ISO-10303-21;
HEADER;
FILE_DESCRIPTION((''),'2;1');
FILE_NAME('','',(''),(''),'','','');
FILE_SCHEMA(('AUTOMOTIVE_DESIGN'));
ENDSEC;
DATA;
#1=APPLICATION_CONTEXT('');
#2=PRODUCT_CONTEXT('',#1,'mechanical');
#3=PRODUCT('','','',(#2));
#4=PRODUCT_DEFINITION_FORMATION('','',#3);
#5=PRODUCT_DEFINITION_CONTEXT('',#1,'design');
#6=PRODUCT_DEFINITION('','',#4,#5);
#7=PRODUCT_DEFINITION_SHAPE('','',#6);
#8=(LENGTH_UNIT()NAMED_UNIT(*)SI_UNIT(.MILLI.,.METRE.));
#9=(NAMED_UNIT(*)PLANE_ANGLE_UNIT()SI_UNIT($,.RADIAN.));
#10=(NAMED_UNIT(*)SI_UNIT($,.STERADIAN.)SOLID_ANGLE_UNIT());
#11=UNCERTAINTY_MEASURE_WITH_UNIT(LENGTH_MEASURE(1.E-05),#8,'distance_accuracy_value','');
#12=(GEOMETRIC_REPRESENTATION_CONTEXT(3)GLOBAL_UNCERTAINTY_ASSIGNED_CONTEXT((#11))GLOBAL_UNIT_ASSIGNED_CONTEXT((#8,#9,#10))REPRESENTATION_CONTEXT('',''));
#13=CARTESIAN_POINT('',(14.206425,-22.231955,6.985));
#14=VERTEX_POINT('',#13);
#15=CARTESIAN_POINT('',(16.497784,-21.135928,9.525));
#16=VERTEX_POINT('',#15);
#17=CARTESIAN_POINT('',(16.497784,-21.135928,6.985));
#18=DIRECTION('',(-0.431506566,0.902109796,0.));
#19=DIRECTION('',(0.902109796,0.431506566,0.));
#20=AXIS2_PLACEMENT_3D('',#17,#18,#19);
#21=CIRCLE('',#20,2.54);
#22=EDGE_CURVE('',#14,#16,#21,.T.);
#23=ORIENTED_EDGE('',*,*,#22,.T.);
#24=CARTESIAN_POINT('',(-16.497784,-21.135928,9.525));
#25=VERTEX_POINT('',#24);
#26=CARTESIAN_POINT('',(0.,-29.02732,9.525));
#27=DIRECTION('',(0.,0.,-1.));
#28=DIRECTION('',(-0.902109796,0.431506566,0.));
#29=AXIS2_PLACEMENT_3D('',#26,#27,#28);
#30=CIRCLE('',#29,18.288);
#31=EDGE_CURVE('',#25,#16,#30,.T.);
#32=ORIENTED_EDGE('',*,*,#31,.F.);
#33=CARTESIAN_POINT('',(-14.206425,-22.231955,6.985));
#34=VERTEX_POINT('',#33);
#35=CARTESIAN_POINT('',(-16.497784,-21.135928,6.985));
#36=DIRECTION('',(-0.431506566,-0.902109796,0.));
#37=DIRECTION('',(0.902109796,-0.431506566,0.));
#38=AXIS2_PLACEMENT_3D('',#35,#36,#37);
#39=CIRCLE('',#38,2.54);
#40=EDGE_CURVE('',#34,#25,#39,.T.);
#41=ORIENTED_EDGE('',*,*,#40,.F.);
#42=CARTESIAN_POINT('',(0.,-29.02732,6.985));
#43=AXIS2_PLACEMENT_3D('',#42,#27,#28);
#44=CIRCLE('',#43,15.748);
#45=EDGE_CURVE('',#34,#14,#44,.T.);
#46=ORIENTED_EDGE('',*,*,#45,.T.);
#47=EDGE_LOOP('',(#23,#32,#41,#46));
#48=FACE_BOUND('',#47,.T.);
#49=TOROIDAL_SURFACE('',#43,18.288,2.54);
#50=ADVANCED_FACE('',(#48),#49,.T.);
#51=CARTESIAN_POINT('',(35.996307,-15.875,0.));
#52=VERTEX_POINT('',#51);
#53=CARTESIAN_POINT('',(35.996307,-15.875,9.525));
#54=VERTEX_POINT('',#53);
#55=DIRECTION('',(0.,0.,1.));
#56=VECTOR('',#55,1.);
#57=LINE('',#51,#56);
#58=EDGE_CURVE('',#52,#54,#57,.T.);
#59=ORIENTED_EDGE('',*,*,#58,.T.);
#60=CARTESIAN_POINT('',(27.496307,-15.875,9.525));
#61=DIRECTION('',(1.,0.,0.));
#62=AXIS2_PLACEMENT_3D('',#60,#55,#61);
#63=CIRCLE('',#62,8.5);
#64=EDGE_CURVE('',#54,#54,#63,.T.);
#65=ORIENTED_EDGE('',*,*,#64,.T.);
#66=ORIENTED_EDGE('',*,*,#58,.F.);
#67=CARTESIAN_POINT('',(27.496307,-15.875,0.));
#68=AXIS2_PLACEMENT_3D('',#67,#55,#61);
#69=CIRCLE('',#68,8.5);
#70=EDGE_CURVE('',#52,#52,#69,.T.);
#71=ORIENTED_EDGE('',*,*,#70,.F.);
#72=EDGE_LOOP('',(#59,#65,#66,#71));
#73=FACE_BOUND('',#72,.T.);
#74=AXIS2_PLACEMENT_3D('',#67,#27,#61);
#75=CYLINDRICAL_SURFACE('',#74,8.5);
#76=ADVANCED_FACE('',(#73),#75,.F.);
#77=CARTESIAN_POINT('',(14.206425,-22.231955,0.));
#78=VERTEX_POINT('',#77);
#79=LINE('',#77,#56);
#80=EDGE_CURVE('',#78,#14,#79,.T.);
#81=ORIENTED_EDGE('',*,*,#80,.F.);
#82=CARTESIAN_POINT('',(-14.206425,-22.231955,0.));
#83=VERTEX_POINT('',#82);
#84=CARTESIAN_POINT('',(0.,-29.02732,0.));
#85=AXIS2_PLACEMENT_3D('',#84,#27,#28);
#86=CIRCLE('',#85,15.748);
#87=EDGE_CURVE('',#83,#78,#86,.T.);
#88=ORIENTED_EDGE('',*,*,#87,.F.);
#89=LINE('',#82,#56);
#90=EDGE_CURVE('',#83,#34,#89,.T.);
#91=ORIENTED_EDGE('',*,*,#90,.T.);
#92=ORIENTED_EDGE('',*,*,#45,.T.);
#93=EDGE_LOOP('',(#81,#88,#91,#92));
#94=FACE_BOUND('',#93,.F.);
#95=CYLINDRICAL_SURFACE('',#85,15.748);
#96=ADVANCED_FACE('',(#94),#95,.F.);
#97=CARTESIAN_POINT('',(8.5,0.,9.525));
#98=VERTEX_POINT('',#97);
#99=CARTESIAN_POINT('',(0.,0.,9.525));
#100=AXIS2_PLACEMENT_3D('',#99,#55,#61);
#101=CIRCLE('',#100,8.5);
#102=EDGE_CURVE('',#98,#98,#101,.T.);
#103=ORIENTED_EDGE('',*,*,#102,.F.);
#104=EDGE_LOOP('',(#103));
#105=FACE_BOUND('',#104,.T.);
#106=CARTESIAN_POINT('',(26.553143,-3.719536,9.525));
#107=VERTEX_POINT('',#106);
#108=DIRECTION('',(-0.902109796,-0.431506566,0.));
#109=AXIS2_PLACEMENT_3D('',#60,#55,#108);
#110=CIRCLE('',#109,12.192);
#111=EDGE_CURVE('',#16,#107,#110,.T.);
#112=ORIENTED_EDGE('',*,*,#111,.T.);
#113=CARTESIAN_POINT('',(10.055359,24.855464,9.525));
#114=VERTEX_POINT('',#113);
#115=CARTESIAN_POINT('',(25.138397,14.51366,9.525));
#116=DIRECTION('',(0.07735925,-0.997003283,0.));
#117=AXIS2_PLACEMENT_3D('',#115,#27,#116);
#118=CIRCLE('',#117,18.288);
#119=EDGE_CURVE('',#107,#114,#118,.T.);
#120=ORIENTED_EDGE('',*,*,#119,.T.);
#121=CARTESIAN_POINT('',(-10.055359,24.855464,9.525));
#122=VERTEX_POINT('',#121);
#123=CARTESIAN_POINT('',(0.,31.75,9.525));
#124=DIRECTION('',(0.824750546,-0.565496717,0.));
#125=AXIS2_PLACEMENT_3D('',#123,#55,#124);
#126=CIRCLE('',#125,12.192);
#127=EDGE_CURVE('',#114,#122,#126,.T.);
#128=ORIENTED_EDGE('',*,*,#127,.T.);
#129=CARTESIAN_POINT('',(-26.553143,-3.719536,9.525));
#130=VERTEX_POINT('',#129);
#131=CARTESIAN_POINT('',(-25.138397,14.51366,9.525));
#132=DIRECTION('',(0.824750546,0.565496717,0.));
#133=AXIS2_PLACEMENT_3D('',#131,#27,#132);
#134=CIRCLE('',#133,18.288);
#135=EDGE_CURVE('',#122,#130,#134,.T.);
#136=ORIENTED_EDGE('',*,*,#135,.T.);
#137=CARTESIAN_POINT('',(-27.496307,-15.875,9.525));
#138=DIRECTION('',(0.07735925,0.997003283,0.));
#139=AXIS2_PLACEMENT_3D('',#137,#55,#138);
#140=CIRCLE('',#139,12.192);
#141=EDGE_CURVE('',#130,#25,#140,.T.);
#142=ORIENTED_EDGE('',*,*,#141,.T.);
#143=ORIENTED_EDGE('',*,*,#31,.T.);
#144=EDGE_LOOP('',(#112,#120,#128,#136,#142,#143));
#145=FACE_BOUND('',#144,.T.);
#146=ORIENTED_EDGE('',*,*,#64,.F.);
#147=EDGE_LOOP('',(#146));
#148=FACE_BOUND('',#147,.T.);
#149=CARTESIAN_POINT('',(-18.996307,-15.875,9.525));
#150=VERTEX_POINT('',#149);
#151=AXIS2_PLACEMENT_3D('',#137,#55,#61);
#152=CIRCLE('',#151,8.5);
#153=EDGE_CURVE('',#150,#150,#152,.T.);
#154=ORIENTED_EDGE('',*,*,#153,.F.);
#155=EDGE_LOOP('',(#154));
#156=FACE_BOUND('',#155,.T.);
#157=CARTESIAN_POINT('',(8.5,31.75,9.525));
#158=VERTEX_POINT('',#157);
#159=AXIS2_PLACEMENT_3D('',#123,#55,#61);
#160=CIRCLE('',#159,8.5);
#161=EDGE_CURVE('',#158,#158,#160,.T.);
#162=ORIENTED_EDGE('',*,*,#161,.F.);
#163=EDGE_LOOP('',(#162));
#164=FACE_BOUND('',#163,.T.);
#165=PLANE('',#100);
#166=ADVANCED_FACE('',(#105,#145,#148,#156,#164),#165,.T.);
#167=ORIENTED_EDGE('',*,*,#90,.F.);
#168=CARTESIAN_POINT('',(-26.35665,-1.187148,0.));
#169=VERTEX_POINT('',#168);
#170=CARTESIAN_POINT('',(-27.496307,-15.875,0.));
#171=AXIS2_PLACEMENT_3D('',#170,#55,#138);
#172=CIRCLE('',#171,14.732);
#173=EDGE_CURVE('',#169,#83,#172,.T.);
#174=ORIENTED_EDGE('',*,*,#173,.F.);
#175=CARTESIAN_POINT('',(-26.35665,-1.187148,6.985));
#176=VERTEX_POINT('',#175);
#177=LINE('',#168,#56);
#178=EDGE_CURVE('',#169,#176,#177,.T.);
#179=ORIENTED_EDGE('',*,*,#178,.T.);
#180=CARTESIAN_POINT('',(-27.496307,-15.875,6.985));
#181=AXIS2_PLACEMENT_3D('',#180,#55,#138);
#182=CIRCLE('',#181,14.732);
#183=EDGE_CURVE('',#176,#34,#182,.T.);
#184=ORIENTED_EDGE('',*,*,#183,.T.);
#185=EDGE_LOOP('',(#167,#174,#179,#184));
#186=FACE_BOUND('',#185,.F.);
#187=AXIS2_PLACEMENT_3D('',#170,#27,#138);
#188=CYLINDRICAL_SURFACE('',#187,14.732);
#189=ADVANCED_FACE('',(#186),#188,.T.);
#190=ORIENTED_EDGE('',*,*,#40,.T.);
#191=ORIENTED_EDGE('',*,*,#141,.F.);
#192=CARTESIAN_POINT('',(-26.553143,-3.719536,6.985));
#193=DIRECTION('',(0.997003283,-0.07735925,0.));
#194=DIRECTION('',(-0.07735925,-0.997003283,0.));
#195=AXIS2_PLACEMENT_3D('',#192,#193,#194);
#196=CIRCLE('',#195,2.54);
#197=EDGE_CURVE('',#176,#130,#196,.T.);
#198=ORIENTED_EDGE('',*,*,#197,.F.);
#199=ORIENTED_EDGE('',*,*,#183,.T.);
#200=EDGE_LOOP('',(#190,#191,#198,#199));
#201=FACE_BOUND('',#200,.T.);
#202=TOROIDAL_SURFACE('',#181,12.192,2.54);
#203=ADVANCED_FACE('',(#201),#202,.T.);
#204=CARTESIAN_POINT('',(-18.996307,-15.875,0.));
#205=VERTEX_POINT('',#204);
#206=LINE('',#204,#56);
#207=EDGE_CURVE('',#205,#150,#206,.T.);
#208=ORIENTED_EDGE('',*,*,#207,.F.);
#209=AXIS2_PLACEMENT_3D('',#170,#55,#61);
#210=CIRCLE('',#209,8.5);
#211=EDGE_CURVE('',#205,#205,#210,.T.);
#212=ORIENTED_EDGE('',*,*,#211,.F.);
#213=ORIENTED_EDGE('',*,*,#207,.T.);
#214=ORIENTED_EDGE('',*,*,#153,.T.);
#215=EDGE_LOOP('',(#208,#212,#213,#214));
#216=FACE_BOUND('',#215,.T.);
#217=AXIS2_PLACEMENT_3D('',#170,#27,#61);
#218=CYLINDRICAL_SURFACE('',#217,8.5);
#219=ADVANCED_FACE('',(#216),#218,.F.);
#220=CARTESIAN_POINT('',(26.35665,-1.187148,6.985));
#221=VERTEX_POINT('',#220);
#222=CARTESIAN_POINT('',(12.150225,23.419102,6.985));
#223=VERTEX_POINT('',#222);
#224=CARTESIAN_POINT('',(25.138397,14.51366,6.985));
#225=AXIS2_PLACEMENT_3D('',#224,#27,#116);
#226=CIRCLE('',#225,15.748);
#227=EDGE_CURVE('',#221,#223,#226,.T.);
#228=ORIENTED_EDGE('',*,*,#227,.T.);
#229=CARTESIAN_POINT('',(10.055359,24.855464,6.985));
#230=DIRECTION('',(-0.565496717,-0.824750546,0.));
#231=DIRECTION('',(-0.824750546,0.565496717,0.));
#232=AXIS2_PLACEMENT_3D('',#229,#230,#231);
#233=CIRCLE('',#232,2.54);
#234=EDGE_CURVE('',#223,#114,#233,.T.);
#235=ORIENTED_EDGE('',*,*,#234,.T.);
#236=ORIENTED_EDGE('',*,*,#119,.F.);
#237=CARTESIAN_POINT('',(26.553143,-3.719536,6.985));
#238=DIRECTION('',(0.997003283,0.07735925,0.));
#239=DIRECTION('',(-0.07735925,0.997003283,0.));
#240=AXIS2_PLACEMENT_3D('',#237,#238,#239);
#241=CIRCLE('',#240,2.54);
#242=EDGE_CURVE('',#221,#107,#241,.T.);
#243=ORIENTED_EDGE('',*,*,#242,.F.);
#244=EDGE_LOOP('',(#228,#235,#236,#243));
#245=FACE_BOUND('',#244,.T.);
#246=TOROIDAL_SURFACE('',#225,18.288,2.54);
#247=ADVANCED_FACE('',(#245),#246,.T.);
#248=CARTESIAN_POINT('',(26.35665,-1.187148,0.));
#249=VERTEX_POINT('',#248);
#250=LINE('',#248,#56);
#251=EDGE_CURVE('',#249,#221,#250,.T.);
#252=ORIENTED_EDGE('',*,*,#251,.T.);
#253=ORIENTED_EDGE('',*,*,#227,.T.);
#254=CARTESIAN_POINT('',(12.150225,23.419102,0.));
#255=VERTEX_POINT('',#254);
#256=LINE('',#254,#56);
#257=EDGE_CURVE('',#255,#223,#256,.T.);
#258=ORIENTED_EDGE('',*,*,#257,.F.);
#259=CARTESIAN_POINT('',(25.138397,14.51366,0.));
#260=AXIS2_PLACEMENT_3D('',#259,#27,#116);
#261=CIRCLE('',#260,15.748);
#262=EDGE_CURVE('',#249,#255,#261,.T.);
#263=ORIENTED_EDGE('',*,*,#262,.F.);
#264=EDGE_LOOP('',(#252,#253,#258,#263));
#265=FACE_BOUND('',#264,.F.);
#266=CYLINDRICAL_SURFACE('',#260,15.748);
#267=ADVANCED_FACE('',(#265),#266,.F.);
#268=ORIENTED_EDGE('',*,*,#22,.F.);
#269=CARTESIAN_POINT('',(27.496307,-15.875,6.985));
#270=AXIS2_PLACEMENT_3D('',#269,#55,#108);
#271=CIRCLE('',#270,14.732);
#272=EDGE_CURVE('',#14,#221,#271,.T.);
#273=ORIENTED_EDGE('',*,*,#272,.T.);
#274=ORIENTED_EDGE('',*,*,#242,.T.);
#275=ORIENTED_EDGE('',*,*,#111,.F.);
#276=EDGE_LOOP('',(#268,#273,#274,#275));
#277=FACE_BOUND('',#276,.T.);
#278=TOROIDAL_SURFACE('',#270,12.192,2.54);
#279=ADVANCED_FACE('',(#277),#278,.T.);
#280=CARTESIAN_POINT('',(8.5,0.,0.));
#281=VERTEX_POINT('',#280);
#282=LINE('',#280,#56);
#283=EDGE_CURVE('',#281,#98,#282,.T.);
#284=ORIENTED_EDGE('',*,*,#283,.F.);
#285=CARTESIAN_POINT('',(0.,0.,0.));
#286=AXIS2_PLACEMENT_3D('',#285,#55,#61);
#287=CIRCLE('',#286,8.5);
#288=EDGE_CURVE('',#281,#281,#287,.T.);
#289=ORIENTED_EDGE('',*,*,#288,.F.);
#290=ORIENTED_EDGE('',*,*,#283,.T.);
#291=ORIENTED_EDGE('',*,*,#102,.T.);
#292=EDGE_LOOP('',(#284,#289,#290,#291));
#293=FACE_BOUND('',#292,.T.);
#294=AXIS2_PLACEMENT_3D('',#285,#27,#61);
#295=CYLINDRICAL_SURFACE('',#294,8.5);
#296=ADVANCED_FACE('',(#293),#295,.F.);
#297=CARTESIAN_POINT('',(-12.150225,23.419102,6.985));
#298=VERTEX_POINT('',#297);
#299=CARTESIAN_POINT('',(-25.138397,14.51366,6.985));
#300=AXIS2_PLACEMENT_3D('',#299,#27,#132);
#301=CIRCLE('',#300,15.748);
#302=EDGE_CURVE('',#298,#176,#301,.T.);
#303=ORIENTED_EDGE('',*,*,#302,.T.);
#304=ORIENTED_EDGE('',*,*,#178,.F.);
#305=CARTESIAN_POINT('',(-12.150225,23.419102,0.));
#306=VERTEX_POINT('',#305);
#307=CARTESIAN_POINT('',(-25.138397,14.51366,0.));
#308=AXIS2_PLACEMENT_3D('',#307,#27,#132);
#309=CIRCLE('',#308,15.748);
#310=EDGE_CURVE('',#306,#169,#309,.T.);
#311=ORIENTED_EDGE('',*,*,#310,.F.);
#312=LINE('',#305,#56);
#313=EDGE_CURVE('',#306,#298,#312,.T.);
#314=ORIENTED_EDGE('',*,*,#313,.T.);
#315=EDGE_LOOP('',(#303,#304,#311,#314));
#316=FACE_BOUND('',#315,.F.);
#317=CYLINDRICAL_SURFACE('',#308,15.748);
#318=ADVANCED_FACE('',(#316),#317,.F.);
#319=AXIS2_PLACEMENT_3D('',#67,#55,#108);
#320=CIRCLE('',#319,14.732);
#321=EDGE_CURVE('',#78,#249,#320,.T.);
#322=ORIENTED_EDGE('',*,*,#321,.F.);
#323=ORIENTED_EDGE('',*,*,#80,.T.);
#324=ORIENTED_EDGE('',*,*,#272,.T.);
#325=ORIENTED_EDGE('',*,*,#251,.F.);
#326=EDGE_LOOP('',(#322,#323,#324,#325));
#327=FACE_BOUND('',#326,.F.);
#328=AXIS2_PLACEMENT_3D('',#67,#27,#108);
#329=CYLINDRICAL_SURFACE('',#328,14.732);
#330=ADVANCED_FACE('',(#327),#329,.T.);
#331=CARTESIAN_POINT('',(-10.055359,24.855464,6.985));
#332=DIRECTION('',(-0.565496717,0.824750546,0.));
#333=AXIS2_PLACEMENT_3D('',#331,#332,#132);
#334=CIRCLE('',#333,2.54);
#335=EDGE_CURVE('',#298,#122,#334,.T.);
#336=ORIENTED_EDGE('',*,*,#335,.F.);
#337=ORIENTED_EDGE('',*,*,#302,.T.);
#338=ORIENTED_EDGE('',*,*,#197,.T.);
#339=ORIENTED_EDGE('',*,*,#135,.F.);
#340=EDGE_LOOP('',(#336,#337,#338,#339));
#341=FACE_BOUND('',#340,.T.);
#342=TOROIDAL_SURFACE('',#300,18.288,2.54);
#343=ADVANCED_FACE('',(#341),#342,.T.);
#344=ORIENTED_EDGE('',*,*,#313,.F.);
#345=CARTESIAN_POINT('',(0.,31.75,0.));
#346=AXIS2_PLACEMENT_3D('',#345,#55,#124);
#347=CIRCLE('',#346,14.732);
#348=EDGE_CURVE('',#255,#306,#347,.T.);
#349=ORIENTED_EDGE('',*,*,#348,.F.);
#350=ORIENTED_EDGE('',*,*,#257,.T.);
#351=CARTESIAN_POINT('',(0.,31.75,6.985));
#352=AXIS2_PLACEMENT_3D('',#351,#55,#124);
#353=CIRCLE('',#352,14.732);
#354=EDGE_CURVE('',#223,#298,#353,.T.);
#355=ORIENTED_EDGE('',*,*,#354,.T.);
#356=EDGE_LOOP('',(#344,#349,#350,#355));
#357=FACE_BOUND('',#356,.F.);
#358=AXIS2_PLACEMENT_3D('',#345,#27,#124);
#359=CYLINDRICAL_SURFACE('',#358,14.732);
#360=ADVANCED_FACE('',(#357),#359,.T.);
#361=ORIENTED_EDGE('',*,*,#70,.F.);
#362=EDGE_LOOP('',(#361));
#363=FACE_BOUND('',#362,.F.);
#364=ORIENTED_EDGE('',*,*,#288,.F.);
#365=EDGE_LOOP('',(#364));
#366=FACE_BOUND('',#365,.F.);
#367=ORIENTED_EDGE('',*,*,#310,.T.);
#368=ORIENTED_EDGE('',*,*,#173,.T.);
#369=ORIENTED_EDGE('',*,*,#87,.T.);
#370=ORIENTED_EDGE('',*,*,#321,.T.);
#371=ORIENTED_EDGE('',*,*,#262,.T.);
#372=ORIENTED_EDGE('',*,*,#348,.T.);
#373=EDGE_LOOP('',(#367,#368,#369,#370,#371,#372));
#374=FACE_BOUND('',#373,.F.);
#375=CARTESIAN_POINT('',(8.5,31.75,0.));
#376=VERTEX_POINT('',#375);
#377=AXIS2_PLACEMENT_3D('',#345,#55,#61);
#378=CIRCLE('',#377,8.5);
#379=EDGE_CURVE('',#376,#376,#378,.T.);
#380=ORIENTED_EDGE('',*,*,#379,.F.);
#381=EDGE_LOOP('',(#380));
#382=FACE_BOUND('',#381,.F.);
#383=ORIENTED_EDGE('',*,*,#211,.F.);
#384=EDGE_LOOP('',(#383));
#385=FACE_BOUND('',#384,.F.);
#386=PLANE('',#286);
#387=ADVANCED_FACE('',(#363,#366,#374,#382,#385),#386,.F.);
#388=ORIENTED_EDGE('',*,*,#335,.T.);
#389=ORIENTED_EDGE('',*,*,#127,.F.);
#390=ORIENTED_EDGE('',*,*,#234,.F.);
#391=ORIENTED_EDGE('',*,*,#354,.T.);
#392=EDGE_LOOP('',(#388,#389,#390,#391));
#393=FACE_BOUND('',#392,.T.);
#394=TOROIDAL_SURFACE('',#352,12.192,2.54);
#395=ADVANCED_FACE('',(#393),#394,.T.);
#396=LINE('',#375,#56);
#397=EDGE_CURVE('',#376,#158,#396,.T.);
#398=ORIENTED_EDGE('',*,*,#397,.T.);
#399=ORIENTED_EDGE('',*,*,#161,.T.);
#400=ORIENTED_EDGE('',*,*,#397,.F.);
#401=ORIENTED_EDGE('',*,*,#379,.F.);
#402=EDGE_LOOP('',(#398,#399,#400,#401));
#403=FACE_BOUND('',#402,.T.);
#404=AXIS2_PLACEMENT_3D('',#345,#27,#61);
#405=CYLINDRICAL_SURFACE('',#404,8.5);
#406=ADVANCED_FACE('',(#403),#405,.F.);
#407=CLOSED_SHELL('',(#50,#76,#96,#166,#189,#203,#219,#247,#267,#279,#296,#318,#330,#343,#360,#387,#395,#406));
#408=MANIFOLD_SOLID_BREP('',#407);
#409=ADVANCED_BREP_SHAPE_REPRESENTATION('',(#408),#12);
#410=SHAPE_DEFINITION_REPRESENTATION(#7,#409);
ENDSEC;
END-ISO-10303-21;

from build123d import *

# Parameters (mm, degrees)
F0_R     = 8.5
F1_DEPTH = 9.525
F2_R     = 2.54


# Not quite as in the source:
# - a feature names something its author has since deleted; it is built from what else it names


with BuildPart() as f1:
    # F0 (on Top) → F1 (new body)
    with BuildSketch(Plane.XY):
        with BuildLine():
            ThreePointArc((-12.1502250441, 23.4191023666), (-11.5002285841, 6.6396600688), (-26.3566501053, -1.1871476334))
            ThreePointArc((-26.3566501053, -1.1871476334), (-40.2545928187, -23.241), (-14.2064250612, -22.2319547331))
            ThreePointArc((-14.2064250612, -22.2319547331), (0, -13.2793201375), (14.2064250612, -22.2319547331))
            ThreePointArc((14.2064250612, -22.2319547331), (40.2545928187, -23.241), (26.3566501053, -1.1871476334))
            ThreePointArc((26.3566501053, -1.1871476334), (11.5002285841, 6.6396600688), (12.1502250441, 23.4191023666))
            ThreePointArc((12.1502250441, 23.4191023666), (0, 46.482), (-12.1502250441, 23.4191023666))
        make_face()
        with Locations((-27.4963065702, -15.875)):
            Circle(F0_R, mode=Mode.SUBTRACT)
        with Locations((27.4963065702, -15.875)):
            Circle(F0_R, mode=Mode.SUBTRACT)
        Circle(F0_R, mode=Mode.SUBTRACT)
        with Locations((0, 31.75)):
            Circle(F0_R, mode=Mode.SUBTRACT)
    extrude(amount=F1_DEPTH)

    # F2
    f2_edges = [f1.edges().sort_by_distance(p)[0] for p in [
        (-11.500229, 6.63966, 9.525),
    ]]
    fillet(f2_edges, radius=F2_R)


solid = f1.part
